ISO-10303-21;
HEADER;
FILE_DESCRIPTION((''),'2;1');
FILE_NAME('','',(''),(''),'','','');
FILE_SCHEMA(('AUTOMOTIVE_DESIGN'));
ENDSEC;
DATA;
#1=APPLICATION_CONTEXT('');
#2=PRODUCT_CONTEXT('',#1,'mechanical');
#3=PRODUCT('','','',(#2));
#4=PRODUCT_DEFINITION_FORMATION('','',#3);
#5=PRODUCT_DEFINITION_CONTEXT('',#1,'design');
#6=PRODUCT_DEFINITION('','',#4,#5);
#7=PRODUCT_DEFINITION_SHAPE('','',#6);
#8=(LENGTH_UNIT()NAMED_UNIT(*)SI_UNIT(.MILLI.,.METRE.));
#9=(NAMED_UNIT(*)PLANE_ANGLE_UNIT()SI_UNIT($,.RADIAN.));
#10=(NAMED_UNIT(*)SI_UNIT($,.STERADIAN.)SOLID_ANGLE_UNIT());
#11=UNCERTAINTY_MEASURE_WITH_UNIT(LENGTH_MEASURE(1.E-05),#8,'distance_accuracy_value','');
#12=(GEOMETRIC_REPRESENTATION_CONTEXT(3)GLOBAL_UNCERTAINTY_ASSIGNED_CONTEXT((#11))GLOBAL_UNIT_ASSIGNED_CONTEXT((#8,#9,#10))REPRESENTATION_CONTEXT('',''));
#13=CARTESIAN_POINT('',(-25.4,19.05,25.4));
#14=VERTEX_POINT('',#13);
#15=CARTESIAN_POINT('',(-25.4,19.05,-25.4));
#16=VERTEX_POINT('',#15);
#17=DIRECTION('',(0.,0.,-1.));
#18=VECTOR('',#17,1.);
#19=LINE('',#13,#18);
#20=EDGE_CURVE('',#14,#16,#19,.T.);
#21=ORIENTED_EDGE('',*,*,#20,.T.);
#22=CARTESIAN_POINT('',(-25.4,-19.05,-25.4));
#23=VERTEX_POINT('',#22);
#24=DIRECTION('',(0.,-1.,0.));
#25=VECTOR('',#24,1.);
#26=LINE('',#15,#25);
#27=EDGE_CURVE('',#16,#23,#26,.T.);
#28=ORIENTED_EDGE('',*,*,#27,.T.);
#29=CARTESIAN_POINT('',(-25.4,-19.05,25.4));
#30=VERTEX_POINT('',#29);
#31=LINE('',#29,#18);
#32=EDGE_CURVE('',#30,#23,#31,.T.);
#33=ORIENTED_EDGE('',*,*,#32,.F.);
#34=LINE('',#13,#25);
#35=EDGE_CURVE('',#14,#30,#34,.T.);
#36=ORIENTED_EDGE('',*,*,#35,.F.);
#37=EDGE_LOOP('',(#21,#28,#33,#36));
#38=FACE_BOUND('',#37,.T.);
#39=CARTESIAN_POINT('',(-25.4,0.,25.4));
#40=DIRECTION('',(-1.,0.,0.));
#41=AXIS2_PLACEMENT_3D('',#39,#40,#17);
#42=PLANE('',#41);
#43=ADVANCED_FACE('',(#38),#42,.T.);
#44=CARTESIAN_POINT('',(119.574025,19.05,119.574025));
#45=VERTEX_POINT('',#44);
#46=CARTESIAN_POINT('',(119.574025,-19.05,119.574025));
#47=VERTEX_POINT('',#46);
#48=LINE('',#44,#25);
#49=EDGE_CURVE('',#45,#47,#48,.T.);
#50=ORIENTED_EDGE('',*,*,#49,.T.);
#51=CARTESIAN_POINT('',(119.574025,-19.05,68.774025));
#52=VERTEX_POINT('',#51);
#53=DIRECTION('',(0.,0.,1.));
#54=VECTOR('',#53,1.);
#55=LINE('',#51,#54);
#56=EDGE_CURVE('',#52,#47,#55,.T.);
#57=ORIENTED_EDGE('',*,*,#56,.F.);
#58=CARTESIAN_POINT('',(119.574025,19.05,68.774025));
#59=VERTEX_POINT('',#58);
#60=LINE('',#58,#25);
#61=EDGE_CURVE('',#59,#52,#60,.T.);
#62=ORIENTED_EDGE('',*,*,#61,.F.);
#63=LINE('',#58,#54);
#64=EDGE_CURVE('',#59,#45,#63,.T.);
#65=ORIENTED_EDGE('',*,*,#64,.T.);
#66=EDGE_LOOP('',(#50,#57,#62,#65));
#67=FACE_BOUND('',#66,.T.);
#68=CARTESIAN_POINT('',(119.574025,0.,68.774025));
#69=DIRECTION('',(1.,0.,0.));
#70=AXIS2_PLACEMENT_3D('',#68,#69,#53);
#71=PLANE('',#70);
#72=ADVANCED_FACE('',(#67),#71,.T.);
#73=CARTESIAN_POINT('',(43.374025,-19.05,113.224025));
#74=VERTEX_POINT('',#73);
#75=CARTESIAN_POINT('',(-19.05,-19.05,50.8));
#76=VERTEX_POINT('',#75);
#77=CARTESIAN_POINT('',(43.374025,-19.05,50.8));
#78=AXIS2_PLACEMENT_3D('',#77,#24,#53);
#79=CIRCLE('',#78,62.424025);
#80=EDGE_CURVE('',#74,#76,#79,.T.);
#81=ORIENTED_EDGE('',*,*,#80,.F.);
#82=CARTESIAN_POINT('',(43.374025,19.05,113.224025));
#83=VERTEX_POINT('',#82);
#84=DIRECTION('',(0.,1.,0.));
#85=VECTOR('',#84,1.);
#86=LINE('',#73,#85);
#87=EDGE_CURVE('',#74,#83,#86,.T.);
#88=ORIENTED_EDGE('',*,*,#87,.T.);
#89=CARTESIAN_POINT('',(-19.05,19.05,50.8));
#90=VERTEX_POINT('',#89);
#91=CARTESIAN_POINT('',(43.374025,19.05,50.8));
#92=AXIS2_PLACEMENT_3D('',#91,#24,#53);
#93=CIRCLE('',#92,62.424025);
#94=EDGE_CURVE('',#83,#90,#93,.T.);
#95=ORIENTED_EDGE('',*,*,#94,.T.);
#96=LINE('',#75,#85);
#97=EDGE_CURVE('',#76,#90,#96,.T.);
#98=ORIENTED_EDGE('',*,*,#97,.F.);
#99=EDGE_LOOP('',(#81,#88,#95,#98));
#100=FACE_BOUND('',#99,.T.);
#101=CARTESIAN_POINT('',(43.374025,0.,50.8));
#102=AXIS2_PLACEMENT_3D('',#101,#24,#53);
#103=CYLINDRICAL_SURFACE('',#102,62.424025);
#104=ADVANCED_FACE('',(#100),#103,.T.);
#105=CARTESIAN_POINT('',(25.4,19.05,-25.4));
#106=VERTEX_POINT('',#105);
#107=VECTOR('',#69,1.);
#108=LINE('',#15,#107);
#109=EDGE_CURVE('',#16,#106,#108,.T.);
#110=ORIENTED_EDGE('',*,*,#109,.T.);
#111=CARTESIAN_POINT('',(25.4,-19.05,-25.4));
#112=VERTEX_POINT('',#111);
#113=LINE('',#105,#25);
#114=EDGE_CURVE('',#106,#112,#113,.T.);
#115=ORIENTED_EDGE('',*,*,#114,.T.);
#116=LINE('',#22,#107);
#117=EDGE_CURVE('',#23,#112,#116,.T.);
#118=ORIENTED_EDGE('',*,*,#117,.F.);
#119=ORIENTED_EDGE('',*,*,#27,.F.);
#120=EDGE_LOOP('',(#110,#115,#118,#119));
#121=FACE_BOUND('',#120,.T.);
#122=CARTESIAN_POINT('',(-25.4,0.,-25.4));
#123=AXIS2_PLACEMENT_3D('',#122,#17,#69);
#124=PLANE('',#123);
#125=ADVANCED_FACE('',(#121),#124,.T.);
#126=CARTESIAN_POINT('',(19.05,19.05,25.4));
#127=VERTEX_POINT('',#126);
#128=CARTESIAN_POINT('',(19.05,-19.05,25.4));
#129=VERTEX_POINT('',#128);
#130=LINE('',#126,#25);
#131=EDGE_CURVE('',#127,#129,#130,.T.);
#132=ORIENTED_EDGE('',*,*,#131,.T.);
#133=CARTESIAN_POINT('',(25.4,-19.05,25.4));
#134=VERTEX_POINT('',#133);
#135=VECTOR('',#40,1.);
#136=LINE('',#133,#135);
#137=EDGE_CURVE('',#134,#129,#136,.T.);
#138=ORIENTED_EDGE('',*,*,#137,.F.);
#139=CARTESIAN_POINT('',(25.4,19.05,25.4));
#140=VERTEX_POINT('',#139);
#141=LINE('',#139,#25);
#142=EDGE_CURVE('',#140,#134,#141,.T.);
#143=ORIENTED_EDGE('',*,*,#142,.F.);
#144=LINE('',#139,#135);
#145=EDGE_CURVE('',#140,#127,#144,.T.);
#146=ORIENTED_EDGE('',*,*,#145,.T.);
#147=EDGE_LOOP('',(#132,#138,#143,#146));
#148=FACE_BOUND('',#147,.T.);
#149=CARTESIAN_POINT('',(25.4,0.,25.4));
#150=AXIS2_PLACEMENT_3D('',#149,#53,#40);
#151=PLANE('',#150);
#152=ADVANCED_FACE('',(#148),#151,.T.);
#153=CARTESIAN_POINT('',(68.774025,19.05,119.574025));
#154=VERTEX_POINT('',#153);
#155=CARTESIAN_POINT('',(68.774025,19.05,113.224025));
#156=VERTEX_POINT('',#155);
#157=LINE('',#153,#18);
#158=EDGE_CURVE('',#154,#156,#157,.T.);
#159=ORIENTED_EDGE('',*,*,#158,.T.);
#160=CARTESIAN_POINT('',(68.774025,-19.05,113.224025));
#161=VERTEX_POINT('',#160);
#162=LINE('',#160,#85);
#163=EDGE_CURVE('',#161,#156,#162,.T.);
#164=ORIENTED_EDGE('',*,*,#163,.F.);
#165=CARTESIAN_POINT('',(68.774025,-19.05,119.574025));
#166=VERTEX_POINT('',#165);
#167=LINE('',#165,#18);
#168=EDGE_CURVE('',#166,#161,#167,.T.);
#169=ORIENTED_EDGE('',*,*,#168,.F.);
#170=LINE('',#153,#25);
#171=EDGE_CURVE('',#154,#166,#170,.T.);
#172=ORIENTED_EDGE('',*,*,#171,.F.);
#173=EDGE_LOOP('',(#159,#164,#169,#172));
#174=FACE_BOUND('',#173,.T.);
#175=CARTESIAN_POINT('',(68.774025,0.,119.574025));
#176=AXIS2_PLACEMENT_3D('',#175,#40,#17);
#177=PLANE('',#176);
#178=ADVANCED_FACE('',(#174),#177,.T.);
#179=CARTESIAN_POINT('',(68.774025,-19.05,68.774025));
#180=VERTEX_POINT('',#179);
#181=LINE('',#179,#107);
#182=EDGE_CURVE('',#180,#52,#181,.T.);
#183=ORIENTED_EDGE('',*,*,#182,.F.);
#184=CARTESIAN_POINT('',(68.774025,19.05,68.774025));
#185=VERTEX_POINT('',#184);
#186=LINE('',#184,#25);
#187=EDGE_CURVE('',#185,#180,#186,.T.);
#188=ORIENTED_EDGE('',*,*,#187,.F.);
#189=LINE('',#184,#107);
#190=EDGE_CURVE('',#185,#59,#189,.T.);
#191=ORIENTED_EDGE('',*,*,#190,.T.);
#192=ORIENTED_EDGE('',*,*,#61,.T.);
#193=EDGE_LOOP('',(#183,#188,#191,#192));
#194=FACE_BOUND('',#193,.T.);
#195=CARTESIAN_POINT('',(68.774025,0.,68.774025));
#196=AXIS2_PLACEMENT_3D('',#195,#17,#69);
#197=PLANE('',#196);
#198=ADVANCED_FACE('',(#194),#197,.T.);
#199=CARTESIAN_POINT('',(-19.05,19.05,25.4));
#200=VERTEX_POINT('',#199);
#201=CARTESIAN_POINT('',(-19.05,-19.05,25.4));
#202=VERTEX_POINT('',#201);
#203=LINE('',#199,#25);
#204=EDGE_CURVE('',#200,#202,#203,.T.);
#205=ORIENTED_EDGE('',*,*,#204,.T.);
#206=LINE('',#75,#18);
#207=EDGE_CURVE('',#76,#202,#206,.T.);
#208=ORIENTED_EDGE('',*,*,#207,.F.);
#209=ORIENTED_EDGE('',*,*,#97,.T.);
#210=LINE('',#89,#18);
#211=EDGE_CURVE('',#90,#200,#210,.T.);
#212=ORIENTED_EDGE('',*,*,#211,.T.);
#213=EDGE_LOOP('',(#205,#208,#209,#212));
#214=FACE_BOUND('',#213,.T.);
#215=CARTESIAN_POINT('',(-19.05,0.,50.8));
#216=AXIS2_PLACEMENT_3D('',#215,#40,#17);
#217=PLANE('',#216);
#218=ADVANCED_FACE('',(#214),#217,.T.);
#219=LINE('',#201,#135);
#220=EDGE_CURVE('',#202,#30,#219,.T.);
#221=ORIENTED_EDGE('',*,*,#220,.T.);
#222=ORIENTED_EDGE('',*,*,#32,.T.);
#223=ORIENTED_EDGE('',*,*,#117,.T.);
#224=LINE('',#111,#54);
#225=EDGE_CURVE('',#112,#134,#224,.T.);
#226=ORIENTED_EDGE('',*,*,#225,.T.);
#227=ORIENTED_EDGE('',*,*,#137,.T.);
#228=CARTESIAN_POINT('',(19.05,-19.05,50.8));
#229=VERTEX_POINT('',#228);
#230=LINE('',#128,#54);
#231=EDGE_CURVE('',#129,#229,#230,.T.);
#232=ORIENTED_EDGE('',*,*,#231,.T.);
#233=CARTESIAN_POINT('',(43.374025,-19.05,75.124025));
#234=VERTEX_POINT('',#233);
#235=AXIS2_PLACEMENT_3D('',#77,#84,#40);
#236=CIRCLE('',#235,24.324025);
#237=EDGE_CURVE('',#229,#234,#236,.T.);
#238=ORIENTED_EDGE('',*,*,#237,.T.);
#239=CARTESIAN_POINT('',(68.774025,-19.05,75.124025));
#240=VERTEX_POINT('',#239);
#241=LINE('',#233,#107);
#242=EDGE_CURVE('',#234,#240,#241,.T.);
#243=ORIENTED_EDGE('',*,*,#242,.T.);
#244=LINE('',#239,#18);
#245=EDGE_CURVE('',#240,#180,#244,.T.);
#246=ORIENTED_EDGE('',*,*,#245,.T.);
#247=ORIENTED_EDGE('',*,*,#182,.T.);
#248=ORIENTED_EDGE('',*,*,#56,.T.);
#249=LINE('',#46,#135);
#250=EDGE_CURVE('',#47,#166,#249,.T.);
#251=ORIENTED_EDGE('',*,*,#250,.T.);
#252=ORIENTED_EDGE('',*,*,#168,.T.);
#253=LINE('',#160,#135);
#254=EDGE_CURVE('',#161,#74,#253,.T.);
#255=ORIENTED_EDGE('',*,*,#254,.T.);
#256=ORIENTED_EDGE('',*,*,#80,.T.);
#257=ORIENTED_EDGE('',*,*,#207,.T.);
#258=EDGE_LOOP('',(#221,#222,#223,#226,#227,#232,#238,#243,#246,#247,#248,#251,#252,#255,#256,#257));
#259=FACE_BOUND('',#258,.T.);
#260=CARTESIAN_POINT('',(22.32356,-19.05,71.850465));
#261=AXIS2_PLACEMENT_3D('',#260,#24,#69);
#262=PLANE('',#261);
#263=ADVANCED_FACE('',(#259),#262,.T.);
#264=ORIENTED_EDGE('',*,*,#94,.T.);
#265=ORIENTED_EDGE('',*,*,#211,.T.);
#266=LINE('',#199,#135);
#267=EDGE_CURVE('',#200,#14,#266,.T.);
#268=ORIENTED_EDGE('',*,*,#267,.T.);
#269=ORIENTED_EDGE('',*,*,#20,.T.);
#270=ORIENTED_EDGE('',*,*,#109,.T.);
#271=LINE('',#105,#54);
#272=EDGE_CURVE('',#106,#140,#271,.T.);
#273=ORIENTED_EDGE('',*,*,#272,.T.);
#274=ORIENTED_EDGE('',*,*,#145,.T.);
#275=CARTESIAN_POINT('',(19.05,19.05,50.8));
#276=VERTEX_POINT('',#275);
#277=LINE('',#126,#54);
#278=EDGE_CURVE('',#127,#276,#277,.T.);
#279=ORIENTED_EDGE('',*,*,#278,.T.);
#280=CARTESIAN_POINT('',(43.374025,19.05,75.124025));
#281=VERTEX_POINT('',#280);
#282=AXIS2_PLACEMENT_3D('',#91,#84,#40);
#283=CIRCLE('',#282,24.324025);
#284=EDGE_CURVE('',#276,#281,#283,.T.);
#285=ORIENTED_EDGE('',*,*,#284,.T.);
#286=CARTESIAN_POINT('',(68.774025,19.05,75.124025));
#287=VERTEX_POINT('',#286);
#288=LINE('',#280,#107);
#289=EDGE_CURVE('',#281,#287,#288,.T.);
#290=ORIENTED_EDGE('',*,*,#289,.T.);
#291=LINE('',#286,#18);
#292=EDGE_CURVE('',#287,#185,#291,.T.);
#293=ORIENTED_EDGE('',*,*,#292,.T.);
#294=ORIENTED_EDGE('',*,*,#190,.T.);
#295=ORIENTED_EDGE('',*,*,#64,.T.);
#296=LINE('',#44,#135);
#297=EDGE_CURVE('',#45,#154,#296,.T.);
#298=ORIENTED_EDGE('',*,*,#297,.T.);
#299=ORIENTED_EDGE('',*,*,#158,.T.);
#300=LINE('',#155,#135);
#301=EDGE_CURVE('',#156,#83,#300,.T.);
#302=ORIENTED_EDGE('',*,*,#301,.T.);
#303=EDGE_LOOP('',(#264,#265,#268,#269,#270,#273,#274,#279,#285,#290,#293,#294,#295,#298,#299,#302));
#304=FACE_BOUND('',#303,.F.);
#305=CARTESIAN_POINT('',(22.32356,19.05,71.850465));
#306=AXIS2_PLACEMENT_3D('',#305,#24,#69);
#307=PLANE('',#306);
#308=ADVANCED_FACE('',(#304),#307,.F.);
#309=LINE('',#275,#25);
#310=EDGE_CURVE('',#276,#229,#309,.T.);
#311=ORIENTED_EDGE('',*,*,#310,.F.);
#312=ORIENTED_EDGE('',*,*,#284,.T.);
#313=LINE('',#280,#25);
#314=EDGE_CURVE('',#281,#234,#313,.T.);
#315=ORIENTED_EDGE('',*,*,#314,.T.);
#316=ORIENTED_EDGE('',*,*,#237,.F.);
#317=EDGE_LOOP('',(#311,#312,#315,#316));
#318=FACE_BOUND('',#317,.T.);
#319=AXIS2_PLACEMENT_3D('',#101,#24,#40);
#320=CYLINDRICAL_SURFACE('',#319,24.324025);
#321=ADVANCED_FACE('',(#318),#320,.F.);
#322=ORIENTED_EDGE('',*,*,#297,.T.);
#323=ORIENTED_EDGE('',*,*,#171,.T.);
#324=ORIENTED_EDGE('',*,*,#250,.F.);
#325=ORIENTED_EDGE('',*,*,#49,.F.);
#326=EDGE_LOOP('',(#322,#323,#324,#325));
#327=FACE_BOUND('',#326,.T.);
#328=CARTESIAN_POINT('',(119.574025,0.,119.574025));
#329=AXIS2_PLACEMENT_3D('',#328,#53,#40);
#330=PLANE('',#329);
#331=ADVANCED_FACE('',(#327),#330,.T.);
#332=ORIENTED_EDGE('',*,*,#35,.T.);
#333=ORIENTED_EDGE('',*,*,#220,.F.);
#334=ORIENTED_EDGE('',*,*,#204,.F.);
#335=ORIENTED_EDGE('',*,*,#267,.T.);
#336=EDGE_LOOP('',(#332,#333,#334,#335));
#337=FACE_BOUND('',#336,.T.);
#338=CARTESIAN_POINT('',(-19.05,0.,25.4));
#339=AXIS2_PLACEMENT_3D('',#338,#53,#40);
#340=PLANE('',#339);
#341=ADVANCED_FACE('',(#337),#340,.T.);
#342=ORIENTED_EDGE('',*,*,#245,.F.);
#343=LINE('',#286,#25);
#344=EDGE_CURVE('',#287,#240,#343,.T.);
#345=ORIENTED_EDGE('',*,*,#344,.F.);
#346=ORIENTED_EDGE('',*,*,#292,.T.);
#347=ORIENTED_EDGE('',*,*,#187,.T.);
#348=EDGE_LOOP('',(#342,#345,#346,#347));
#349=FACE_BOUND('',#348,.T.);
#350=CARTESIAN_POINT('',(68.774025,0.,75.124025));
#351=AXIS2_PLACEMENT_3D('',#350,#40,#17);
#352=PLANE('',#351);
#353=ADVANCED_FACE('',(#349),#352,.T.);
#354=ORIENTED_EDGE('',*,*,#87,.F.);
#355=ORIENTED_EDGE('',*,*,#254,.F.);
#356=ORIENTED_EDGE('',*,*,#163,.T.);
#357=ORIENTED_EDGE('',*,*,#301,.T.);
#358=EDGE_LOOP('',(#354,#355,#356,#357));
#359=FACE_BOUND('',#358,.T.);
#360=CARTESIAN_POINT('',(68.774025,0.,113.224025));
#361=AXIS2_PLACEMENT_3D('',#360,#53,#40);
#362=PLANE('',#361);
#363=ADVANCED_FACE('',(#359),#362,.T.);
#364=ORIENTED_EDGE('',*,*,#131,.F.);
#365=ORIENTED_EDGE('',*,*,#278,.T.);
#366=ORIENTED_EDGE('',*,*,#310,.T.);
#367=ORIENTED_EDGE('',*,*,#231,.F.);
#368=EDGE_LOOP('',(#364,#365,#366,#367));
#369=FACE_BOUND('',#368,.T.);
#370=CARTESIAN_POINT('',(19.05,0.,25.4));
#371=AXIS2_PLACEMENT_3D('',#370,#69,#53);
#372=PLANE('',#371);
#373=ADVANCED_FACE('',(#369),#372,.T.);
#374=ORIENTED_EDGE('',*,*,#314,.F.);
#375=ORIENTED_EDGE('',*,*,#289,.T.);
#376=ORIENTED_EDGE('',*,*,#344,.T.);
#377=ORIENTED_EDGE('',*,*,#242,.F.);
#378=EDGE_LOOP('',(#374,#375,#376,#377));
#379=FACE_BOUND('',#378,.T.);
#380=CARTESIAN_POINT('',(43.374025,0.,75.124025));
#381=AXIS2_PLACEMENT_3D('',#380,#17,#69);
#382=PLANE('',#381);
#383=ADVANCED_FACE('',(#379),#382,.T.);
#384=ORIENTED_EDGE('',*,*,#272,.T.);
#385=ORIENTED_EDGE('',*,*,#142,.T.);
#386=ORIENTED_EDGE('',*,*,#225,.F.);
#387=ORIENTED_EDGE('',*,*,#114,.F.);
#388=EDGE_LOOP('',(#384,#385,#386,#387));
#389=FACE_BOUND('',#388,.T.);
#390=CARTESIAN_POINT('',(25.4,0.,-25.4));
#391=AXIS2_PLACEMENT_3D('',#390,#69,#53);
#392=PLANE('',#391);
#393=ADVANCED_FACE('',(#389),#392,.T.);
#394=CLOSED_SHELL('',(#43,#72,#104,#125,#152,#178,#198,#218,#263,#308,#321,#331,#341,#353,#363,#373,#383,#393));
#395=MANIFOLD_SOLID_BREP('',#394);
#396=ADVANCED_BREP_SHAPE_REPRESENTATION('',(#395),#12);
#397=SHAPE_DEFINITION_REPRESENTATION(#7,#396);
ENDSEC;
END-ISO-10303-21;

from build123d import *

# Parameters (mm, degrees)
F1_DEPTH = 19.05


# Not quite as in the source:
# - a feature of the source that left no trace in its solid (it failed there, or was rolled back) is left out


with BuildPart() as f1:
    # F0 (on Front) → F1 (new body, symmetric)
    with BuildSketch(Plane.XZ):
        with BuildLine():
            Line((-19.05, 50.8), (-19.05, 25.4))
            Line((-19.05, 25.4), (19.05, 25.4))
            Line((19.05, 25.4), (19.05, 50.8))
            ThreePointArc((19.05, 50.8), (26.174342016, 67.9996831179), (43.3740251338, 75.1240251338))
            Line((43.3740251338, 75.1240251338), (68.7740251338, 75.1240251338))
            Line((68.7740251338, 75.1240251338), (68.7740251338, 113.2240251338))
            Line((68.7740251338, 113.2240251338), (43.3740251338, 113.2240251338))
            ThreePointArc((43.3740251338, 113.2240251338), (-0.7664263473, 94.9404514811), (-19.05, 50.8))
        make_face()
        Polygon((-19.05, 25.4), (-25.4, 25.4), (-25.4, -25.4), (25.4, -25.4), (25.4, 25.4), (19.05, 25.4), align=None)
        Polygon((68.7740251338, 119.5740251338), (68.7740251338, 113.2240251338), (68.7740251338, 75.1240251338), (68.7740251338, 68.7740251338), (119.5740251338, 68.7740251338), (119.5740251338, 119.5740251338), align=None)
    extrude(amount=F1_DEPTH, both=True)


solid = f1.part
